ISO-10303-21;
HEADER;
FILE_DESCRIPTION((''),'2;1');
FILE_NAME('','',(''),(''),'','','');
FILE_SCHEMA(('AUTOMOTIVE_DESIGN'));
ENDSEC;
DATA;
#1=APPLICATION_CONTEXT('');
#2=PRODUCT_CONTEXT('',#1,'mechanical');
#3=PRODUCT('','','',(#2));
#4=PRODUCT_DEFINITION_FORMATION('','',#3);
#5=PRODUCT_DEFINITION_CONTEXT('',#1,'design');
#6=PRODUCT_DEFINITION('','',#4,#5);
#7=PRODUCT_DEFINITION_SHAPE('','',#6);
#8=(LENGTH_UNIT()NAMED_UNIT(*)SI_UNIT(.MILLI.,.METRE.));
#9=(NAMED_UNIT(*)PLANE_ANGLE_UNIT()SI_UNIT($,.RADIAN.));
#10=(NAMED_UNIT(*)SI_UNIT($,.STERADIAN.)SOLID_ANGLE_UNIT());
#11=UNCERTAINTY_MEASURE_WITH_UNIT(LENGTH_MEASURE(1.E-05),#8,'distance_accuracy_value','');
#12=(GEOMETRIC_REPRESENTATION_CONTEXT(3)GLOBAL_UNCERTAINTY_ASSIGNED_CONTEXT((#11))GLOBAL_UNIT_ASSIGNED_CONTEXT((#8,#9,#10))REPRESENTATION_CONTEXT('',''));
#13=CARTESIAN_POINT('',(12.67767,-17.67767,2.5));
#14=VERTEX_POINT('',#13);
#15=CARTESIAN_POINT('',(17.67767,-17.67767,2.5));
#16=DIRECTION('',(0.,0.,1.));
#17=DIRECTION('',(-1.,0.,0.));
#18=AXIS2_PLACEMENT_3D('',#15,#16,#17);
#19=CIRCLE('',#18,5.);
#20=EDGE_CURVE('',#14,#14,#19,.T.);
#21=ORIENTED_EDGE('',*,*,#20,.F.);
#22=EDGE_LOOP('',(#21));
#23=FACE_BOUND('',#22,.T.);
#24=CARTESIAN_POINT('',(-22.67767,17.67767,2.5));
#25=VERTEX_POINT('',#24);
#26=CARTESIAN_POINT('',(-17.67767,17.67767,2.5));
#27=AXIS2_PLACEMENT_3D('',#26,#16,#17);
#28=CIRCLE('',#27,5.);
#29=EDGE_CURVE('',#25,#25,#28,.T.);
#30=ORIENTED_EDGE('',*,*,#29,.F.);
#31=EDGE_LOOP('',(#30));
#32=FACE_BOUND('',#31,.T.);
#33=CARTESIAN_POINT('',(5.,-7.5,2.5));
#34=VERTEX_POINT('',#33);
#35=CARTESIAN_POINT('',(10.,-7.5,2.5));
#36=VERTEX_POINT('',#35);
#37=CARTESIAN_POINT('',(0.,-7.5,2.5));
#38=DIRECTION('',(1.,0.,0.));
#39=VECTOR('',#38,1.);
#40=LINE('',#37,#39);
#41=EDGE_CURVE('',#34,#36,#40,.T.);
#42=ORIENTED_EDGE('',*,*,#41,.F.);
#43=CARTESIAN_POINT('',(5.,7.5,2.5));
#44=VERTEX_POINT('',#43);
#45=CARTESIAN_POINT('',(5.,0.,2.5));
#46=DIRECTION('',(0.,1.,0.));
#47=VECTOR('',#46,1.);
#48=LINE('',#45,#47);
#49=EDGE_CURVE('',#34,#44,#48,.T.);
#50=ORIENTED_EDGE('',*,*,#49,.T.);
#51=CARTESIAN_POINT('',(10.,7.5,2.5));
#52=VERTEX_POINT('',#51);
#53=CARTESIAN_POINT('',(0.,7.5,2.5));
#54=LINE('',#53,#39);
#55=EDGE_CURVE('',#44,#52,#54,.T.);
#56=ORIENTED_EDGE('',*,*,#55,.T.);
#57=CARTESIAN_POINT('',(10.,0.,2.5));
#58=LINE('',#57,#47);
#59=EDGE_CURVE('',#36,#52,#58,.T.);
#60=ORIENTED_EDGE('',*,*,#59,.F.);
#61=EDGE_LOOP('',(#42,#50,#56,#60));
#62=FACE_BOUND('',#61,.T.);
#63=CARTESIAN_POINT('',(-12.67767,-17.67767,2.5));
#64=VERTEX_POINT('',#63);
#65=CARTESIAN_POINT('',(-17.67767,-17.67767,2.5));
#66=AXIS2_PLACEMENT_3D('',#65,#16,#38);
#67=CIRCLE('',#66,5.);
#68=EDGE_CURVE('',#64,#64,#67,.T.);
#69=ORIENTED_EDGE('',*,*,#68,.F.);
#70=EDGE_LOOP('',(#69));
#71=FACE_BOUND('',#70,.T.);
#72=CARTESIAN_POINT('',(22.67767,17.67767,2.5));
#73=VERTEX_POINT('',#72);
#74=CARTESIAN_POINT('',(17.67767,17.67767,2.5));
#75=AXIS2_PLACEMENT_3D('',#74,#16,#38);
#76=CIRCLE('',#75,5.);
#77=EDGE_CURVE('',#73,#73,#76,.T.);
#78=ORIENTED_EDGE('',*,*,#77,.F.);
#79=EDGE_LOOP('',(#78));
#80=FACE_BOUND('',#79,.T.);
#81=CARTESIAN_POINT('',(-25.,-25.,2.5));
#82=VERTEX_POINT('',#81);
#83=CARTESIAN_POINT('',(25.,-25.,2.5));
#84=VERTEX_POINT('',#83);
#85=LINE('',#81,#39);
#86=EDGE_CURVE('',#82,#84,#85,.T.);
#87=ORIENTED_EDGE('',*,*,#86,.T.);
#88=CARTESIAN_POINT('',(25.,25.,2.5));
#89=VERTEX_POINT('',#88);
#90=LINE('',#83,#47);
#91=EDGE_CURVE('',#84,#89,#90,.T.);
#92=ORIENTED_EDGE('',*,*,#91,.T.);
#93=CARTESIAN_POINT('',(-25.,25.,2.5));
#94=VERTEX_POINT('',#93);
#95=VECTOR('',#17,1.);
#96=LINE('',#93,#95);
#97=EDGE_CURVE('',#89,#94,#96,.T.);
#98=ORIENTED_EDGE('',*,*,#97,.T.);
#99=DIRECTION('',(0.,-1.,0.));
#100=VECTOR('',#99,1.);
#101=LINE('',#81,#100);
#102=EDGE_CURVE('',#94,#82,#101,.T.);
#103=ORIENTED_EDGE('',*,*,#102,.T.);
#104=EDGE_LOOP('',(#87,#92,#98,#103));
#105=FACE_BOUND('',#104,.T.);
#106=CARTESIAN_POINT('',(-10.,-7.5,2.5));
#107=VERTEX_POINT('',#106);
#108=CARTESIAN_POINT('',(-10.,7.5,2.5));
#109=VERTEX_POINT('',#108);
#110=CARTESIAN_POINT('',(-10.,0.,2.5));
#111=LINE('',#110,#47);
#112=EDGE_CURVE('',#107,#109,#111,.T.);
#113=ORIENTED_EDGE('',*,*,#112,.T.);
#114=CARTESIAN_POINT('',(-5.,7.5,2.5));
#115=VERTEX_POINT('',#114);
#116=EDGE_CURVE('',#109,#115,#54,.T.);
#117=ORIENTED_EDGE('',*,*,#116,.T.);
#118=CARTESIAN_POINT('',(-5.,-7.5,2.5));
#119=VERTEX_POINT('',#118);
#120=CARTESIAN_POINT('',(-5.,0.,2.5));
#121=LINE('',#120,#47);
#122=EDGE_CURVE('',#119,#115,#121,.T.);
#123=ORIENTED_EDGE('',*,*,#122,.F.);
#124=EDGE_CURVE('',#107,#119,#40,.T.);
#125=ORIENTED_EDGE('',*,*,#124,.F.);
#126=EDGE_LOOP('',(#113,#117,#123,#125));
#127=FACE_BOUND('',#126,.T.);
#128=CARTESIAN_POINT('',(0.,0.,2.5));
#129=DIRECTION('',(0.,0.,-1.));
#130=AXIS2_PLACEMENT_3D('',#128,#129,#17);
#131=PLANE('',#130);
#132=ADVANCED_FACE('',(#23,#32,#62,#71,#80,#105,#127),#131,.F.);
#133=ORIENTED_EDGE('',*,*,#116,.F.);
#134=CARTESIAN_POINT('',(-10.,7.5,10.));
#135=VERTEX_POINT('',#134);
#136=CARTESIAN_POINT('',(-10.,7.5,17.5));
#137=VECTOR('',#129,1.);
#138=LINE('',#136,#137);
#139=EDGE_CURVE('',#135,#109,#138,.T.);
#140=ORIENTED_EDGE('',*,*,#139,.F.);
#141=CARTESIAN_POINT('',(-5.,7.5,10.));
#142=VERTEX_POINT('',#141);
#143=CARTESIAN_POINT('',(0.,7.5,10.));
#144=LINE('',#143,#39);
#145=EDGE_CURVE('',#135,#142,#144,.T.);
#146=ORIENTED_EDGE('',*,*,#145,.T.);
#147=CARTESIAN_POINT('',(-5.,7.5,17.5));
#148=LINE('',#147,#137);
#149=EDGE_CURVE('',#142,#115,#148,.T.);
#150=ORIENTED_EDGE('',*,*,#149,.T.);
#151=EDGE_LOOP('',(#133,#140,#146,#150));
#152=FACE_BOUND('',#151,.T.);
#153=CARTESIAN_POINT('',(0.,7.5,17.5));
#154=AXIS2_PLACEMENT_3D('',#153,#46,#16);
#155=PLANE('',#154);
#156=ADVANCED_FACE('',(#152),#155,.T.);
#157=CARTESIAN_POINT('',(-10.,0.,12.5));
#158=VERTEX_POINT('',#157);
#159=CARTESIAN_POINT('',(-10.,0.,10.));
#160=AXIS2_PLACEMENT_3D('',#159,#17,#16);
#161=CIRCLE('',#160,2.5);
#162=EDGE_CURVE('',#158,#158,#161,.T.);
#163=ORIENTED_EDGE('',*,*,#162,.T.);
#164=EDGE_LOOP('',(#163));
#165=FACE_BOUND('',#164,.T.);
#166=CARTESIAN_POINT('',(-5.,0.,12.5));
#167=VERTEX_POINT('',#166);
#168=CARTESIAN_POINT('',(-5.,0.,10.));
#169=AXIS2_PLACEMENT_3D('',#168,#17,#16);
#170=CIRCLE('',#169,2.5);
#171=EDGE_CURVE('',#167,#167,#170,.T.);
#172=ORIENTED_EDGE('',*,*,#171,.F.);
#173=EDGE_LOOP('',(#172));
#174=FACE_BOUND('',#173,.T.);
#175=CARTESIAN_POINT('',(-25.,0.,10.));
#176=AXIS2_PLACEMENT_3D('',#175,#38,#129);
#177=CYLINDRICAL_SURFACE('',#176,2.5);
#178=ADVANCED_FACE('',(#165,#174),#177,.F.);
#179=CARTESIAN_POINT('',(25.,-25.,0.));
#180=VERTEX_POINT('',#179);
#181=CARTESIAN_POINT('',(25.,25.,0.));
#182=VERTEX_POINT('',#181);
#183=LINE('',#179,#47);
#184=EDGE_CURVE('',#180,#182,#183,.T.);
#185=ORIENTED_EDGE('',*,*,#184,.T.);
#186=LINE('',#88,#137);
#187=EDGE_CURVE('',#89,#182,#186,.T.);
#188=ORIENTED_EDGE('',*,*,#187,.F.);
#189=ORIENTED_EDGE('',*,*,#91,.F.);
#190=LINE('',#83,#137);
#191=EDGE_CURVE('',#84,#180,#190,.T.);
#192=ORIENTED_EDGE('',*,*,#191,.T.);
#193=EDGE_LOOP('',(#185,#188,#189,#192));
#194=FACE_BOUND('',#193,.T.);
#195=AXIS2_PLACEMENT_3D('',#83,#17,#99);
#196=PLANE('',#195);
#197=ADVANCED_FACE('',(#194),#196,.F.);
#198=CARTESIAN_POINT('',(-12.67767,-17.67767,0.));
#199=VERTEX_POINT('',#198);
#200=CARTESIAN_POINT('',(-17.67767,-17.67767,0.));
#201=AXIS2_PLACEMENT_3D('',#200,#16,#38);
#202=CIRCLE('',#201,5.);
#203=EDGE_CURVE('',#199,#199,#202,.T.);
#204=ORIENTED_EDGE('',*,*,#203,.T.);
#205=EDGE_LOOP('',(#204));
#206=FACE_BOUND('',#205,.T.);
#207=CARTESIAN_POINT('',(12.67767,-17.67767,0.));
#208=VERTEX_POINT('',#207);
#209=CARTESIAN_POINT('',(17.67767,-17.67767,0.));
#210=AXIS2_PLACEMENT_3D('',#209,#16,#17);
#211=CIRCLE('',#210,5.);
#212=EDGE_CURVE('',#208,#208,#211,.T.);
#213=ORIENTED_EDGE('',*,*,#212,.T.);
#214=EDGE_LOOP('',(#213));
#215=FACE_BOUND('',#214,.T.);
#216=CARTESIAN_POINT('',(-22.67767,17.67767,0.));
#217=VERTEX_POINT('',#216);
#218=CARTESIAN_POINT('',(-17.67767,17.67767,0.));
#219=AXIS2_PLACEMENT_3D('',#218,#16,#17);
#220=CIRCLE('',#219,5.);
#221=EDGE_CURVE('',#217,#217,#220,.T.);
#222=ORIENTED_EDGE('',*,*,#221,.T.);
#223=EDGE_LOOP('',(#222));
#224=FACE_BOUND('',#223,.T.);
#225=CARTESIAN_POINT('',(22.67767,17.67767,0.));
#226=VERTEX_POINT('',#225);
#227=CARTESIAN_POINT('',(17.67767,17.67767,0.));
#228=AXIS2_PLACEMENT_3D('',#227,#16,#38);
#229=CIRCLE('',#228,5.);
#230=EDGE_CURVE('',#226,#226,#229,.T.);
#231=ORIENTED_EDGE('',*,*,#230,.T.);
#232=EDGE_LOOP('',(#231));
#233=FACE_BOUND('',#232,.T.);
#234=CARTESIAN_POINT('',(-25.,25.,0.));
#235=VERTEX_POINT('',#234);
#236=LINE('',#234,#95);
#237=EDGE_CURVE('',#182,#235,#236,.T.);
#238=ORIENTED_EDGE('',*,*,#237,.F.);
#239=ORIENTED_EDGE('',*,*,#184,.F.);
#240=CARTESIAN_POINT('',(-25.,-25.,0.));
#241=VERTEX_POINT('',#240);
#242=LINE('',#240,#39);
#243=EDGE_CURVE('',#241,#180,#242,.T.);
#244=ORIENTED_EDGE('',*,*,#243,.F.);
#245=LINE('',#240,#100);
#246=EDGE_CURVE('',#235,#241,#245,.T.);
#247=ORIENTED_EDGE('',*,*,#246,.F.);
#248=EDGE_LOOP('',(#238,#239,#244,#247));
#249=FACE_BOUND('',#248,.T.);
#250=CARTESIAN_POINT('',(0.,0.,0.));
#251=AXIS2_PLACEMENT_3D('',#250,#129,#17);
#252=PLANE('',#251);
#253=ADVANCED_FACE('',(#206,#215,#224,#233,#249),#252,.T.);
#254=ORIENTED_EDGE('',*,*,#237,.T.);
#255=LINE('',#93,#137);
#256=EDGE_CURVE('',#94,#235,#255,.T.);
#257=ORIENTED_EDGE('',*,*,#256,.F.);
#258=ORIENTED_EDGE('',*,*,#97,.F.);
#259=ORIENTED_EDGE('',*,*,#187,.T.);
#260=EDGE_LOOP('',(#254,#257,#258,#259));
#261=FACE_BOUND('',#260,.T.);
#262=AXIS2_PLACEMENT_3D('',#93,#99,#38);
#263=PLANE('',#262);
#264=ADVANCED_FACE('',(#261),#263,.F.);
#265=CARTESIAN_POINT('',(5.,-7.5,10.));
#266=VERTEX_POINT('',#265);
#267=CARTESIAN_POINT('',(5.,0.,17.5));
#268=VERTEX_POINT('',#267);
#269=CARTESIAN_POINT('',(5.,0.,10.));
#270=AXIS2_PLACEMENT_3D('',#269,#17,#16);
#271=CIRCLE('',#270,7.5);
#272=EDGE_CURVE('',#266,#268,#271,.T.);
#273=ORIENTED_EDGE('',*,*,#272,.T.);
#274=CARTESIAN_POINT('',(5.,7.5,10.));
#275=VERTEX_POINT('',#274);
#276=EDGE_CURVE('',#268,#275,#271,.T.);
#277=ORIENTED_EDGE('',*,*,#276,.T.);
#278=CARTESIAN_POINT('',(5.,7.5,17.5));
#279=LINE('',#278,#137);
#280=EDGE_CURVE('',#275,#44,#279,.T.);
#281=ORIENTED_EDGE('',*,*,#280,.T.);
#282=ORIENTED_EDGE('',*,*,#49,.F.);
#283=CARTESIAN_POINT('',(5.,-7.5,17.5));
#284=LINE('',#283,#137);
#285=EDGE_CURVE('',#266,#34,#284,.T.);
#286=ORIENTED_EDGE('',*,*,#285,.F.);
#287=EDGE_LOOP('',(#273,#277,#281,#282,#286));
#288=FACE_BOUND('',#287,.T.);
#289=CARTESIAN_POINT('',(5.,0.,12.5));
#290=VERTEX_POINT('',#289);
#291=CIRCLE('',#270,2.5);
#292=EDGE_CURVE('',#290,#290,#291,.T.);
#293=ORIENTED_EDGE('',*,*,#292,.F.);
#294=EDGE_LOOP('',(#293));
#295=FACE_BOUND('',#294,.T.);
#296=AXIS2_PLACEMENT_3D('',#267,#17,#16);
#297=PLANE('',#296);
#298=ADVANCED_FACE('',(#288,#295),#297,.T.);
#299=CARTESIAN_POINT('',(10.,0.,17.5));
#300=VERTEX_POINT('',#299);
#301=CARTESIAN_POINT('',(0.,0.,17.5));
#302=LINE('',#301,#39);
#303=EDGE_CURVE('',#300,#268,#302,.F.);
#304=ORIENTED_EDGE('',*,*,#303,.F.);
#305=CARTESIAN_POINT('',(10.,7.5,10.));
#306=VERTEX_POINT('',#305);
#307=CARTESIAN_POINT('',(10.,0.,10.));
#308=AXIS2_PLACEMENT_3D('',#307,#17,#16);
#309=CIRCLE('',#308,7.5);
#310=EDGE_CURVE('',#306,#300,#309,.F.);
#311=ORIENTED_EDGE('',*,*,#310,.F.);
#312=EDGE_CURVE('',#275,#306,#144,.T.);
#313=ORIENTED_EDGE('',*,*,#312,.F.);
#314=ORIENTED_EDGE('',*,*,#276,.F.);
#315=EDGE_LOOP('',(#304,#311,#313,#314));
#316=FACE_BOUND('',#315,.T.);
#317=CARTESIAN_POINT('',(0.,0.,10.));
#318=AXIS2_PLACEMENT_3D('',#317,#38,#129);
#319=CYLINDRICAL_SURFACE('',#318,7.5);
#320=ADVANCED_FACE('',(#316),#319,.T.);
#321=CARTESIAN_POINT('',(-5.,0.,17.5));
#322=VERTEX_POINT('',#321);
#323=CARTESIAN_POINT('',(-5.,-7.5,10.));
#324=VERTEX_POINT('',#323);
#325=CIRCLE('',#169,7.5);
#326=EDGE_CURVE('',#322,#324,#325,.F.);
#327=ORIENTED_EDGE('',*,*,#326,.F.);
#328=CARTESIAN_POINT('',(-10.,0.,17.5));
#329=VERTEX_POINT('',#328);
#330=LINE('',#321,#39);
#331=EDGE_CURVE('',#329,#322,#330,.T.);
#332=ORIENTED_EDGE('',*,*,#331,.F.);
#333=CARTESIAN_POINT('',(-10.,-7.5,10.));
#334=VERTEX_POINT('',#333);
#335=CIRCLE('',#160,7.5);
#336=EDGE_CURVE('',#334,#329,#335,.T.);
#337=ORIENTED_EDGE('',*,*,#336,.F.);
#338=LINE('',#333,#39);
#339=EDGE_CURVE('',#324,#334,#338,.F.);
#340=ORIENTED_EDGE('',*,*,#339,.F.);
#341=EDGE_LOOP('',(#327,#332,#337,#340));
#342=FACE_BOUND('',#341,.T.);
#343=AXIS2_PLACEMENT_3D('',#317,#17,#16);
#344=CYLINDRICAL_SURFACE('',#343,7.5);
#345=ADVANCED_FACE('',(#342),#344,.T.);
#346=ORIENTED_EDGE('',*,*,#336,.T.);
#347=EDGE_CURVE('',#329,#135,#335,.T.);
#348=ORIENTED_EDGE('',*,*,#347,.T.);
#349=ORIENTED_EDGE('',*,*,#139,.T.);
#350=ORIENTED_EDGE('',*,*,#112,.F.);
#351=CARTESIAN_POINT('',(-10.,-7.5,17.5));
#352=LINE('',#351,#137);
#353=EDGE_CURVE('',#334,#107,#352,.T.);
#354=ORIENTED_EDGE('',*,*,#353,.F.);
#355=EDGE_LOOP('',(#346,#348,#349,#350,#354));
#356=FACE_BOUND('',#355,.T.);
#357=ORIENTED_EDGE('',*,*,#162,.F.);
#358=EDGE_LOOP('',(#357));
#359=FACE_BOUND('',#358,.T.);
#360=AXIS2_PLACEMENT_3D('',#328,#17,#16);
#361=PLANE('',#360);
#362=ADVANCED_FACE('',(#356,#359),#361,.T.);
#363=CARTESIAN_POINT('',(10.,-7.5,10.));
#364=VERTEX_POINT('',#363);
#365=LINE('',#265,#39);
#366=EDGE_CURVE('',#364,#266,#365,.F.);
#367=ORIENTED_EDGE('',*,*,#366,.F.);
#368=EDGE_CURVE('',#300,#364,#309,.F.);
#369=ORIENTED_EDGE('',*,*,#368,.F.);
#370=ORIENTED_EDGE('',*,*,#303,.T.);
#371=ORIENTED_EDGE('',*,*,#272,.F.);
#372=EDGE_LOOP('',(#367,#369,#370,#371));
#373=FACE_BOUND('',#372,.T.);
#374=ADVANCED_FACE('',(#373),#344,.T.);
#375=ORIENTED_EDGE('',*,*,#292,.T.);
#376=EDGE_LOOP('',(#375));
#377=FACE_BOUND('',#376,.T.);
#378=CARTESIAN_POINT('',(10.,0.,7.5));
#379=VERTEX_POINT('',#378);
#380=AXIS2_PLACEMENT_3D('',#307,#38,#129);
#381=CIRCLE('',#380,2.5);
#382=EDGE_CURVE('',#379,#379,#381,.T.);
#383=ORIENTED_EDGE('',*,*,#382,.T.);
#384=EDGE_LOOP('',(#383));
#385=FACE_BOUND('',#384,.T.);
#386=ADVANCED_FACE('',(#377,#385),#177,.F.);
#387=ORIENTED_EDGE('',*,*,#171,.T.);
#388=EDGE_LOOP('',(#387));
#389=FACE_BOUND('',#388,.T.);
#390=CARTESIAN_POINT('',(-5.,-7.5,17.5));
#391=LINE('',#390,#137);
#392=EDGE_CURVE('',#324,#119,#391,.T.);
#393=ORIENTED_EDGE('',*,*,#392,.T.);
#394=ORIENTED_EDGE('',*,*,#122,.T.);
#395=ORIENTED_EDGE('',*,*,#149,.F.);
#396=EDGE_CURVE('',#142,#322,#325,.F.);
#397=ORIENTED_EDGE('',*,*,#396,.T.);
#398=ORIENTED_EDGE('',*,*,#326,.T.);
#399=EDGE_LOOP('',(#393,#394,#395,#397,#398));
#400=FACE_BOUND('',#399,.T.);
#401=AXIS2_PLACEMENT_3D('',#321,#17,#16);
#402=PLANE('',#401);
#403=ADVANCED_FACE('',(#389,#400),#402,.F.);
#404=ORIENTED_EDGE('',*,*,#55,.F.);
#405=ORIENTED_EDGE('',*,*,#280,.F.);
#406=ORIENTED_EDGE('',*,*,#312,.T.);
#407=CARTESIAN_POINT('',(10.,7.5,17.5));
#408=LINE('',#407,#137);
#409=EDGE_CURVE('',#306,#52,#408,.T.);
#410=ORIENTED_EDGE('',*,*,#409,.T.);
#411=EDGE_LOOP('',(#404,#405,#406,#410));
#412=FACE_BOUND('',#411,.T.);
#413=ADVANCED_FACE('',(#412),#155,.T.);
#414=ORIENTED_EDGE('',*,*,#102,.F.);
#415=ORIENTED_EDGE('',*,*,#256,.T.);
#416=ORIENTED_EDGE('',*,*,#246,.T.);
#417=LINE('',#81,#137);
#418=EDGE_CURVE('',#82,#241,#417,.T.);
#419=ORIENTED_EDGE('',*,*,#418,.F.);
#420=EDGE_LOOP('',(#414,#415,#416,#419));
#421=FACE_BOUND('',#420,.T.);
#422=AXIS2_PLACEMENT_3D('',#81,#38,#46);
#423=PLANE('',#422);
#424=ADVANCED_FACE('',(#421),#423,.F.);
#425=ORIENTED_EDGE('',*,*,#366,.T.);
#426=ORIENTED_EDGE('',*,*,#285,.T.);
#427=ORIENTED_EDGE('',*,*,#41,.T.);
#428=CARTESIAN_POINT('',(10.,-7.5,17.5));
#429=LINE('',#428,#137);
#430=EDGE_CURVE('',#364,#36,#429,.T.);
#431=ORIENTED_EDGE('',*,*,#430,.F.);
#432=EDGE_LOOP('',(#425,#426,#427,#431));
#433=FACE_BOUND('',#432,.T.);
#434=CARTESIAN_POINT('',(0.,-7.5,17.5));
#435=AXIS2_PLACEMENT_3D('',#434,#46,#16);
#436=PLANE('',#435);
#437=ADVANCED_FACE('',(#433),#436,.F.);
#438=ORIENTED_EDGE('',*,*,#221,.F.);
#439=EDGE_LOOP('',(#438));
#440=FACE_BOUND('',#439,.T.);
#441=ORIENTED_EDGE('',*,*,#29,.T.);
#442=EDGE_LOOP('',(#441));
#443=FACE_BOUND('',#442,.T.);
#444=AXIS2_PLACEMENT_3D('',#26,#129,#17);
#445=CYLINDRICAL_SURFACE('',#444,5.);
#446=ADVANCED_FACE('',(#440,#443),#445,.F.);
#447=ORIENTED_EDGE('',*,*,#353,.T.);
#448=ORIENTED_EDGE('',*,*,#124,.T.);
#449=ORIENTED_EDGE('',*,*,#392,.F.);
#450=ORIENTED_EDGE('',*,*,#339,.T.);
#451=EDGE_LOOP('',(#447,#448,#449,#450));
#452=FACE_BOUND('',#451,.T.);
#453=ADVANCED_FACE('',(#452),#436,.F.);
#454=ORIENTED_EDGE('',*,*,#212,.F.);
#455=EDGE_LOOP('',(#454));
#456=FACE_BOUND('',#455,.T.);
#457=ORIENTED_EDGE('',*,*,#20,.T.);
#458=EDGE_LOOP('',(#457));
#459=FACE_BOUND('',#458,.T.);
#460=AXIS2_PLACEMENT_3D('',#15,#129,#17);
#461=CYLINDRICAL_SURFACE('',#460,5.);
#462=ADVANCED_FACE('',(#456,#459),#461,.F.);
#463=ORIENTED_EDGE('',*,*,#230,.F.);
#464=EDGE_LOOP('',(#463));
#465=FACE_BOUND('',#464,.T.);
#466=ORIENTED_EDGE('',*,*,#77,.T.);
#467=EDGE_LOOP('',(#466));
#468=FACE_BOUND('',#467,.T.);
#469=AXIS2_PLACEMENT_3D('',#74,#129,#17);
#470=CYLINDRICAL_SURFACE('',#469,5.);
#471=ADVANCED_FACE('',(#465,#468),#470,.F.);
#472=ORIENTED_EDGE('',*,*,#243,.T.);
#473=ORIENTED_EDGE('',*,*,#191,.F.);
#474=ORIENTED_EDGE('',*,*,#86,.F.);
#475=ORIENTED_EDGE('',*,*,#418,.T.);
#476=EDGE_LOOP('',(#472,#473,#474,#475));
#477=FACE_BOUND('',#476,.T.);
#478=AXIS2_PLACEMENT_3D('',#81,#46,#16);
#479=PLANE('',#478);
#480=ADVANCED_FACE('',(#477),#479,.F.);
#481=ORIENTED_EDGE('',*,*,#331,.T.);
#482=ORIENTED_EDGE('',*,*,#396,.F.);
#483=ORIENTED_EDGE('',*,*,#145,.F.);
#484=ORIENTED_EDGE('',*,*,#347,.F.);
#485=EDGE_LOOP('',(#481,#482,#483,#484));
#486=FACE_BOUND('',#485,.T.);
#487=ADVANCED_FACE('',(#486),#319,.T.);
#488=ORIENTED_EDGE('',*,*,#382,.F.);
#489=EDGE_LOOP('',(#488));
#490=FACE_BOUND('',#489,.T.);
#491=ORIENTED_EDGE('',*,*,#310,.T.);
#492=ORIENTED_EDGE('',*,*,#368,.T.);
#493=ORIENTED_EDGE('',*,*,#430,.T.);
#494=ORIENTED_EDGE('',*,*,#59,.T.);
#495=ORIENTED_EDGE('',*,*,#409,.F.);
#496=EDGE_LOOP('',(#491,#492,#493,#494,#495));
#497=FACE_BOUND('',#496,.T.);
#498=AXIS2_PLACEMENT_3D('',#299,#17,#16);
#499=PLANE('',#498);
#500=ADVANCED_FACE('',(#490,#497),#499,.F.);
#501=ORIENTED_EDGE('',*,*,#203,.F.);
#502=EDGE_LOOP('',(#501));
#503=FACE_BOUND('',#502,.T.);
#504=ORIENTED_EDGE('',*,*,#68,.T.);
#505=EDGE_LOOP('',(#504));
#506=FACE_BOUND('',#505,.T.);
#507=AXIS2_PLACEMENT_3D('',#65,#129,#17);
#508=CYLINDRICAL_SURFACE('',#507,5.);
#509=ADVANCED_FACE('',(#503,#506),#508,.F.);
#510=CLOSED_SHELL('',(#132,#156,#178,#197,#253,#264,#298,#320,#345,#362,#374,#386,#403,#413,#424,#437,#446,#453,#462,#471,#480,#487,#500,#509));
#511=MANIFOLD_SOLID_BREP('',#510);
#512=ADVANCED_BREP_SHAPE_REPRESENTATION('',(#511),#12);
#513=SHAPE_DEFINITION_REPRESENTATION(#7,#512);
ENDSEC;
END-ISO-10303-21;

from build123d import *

# Parameters (mm, degrees)
SKETCH1_W           = 50
SKETCH1_H           = 50
SKETCH1_R           = 5
BOSS_EXTRUDE1_DEPTH = 2.5
SKETCH2_W           = 5
SKETCH2_H           = 15
BOSS_EXTRUDE2_DEPTH = 15
SKETCH3_R           = 2.5
CUT_EXTRUDE1_DEPTH  = 47.435439053
FILLET1_R           = 7.5


with BuildPart() as part:
    # Sketch1 → Boss-Extrude1 (new body)
    with BuildSketch(Plane.XY):
        Rectangle(SKETCH1_W, SKETCH1_H)
        with Locations((17.67766953, 17.67766953)):
            Circle(SKETCH1_R, mode=Mode.SUBTRACT)
        with Locations(Location((-17.67766953, 17.67766953, 0), (0, 0, 180))):
            Circle(SKETCH1_R, mode=Mode.SUBTRACT)
        with Locations(Location((17.67766953, -17.67766953, 0), (0, 0, 180))):
            Circle(SKETCH1_R, mode=Mode.SUBTRACT)
        with Locations((-17.67766953, -17.67766953)):
            Circle(SKETCH1_R, mode=Mode.SUBTRACT)
    extrude(amount=BOSS_EXTRUDE1_DEPTH)

    # Sketch2 → Boss-Extrude2 (add)
    with BuildSketch(Plane.XY.offset(2.5)):
        with Locations((-7.5, 0)):
            Rectangle(SKETCH2_W, SKETCH2_H)
        with Locations((7.5, 0)):
            Rectangle(SKETCH2_W, SKETCH2_H)
    extrude(amount=BOSS_EXTRUDE2_DEPTH)

    # Sketch3 → Cut-Extrude1 (cut, through all)
    with BuildSketch(Plane(origin=(10, 0, 0), x_dir=(0, 0, -1), z_dir=(1, 0, 0))):
        with Locations((-10, 0)):
            Circle(SKETCH3_R)
    extrude(amount=-CUT_EXTRUDE1_DEPTH, mode=Mode.SUBTRACT)

    # Fillet1
    fillet1_edges = [part.edges().sort_by_distance(p)[0] for p in [
        (-7.5, 7.5, 17.5),
        (-7.5, -7.5, 17.5),
        (7.5, -7.5, 17.5),
        (7.5, 7.5, 17.5),
    ]]
    fillet(fillet1_edges, radius=FILLET1_R - 0.0001)  # a hair under: the kernel refuses the full size


solid = part.part
